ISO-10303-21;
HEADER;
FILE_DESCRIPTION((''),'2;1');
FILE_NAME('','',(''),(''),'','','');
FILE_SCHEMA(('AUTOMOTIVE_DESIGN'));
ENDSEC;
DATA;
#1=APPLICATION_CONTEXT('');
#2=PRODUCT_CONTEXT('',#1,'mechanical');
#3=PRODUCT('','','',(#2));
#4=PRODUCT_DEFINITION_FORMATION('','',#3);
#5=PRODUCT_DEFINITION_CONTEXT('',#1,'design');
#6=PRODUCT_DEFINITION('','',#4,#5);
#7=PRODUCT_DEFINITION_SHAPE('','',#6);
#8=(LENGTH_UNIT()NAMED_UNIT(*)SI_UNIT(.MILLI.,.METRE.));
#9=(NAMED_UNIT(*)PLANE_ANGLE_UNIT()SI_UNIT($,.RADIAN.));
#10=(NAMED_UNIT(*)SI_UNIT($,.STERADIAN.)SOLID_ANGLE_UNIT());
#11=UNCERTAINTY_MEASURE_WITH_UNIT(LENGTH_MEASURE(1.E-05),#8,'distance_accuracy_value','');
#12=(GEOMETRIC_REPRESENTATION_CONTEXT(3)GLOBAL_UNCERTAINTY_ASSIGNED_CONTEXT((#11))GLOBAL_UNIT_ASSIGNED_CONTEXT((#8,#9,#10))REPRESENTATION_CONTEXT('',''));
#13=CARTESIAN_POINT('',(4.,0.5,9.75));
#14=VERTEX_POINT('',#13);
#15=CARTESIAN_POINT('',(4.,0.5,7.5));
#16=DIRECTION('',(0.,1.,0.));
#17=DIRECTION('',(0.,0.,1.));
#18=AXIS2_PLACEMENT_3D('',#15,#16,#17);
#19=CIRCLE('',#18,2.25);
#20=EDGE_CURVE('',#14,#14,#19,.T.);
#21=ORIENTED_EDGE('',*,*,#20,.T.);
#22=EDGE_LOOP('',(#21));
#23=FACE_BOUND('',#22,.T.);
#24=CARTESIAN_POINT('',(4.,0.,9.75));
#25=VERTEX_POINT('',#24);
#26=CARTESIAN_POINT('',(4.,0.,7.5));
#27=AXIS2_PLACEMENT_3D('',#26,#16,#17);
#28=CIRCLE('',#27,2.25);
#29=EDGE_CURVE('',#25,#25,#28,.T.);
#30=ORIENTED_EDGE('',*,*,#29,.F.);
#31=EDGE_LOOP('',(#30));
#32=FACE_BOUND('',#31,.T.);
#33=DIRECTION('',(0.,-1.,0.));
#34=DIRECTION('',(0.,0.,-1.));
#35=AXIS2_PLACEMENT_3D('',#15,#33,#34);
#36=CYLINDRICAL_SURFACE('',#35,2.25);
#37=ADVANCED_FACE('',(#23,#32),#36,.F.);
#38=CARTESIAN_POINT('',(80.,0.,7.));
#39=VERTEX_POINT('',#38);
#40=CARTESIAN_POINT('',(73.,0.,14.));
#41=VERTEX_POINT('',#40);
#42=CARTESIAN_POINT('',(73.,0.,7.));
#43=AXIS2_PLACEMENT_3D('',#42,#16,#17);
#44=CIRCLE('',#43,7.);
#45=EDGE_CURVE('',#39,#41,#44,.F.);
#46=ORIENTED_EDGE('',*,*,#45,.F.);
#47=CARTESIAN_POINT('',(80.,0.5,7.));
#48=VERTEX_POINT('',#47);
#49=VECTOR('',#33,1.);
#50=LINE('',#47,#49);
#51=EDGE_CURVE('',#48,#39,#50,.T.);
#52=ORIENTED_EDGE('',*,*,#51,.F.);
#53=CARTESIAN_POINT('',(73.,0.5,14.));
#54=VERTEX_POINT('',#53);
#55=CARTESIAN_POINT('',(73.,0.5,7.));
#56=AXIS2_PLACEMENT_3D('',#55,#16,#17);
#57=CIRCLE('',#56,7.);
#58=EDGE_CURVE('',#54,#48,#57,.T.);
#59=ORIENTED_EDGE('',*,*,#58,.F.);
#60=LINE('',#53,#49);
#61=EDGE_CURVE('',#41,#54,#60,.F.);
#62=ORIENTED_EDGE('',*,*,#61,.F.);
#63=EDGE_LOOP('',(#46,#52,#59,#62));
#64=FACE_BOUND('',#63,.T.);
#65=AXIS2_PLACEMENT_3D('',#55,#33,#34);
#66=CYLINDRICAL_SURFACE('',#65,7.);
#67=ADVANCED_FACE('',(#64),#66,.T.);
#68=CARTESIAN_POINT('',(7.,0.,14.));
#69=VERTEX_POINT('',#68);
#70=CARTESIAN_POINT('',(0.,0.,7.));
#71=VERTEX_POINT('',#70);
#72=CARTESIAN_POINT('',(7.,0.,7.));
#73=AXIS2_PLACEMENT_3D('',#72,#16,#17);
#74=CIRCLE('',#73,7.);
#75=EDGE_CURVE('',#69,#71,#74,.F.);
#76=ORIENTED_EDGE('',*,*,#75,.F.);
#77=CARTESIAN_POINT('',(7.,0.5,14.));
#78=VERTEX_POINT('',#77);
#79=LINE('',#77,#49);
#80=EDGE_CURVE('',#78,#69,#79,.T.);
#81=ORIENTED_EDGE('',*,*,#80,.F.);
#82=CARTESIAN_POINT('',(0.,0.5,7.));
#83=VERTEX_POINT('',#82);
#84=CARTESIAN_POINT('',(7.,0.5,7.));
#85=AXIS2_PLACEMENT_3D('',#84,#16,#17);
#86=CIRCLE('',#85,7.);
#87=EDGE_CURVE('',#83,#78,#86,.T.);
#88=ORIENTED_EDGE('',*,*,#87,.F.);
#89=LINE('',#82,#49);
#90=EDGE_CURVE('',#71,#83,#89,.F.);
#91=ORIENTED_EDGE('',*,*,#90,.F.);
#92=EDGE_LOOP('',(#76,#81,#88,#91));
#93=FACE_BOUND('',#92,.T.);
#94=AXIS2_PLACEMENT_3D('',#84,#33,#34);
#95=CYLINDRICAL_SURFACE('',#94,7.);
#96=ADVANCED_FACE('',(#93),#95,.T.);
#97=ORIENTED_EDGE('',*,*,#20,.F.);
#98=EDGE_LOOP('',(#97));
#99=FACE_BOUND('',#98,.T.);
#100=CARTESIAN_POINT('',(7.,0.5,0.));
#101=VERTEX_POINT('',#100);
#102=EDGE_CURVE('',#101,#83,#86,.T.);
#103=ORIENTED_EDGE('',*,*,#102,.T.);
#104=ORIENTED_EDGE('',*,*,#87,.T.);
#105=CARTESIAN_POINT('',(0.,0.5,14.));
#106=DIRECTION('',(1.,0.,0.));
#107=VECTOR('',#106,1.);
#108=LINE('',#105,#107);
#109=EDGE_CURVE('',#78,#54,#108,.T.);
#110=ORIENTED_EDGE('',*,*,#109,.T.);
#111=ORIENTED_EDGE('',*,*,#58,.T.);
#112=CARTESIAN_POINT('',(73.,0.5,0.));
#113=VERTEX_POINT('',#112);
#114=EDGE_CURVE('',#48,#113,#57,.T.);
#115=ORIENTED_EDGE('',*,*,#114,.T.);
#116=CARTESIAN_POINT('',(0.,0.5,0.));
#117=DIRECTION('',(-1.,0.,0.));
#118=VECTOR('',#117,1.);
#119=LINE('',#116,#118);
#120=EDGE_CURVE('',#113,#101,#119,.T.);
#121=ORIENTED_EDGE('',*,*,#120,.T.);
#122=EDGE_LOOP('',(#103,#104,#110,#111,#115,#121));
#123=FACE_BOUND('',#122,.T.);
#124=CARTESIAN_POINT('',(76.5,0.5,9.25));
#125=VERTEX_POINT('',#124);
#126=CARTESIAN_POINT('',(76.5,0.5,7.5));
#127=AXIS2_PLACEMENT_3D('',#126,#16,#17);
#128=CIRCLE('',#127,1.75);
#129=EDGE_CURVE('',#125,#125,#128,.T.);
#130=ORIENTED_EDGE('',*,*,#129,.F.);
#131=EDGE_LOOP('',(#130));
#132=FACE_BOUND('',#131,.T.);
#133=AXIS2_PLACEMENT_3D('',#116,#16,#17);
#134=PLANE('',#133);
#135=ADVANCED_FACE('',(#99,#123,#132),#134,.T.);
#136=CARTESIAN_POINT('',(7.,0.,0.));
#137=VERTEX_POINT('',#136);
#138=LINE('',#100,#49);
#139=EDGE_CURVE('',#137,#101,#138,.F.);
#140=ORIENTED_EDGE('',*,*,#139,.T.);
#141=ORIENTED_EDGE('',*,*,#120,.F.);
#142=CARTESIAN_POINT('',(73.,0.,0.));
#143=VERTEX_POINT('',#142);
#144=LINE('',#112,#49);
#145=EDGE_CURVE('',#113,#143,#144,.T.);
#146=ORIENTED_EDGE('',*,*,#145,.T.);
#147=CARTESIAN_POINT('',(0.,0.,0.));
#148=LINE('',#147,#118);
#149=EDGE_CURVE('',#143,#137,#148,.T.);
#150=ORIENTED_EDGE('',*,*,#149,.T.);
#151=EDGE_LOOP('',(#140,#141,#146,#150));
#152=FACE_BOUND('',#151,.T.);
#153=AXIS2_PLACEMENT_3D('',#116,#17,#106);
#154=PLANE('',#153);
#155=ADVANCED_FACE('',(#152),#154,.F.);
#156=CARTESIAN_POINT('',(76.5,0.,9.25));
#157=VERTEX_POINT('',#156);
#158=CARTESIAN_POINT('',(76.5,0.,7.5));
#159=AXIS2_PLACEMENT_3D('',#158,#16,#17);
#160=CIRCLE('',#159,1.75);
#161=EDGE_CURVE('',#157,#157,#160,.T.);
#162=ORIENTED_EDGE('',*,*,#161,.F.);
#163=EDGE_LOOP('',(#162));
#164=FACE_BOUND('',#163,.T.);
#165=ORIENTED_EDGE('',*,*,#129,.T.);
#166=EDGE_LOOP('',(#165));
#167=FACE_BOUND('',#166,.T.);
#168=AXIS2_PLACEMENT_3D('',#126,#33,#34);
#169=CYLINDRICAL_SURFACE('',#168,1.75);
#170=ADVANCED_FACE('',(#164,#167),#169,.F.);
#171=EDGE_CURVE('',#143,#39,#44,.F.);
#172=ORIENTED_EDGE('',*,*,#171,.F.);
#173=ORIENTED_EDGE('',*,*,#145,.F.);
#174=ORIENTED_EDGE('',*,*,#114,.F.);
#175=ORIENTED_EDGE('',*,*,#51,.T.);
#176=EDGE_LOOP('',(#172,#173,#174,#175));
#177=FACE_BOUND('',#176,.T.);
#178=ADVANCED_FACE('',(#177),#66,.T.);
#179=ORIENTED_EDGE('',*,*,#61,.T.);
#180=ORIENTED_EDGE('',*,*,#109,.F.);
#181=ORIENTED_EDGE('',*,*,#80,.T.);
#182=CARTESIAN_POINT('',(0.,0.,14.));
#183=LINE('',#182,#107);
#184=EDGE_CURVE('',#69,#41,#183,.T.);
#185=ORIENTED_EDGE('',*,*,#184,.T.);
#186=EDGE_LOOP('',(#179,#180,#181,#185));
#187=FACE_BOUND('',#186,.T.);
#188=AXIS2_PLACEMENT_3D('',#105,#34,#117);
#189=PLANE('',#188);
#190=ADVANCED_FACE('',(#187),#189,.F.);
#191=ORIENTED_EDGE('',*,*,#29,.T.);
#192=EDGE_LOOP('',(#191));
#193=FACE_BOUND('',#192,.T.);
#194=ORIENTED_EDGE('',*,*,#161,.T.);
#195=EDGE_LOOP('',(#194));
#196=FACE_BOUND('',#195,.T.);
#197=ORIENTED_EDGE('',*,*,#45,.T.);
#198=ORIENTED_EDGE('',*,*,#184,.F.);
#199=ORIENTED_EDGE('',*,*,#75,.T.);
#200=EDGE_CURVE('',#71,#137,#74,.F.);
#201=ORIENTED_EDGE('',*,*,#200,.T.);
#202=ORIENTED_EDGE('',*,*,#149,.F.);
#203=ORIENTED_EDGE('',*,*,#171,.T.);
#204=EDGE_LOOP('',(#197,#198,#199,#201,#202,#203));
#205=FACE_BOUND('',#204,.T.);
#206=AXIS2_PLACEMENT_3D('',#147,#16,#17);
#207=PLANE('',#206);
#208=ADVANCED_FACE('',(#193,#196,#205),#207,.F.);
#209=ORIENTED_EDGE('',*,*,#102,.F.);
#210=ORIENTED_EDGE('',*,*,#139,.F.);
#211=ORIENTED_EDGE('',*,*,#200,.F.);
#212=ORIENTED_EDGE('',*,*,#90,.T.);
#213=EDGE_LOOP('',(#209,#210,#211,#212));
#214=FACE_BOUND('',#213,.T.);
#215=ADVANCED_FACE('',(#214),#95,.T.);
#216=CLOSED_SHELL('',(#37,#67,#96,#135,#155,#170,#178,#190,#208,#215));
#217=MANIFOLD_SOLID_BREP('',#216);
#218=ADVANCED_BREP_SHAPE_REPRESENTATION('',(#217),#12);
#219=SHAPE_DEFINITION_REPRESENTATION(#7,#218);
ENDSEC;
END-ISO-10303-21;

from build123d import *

# Parameters (mm, degrees)
SKETCH_1_W      = 80
SKETCH_1_H      = 14
SKETCH_1_R      = 2.25
SKETCH_1_R_2    = 1.75
EXTRUDE_1_DEPTH = 0.5
FILLET_1_R      = 7


with BuildPart() as part:
    # 草图1 → 凸台-拉伸1 (new body)
    with BuildSketch(Plane(origin=(0, 0, 0), x_dir=(1, 0, 0), z_dir=(0, 1, 0))):
        with Locations((40, -7)):
            Rectangle(SKETCH_1_W, SKETCH_1_H)
        with Locations(Location((4, -7.5, 0), (0, 0, 270))):
            Circle(SKETCH_1_R, mode=Mode.SUBTRACT)
        with Locations(Location((76.5, -7.5, 0), (0, 0, 270))):
            Circle(SKETCH_1_R_2, mode=Mode.SUBTRACT)
    extrude(amount=EXTRUDE_1_DEPTH)

    # 圆角1
    fillet_1_edges = [part.edges().sort_by_distance(p)[0] for p in [
        (0, 0.25, 0),
        (80, 0.25, 0),
        (80, 0.25, 14),
        (0, 0.25, 14),
    ]]
    fillet(fillet_1_edges, radius=FILLET_1_R - 0.0001)  # a hair under: the kernel refuses the full size


solid = part.part
